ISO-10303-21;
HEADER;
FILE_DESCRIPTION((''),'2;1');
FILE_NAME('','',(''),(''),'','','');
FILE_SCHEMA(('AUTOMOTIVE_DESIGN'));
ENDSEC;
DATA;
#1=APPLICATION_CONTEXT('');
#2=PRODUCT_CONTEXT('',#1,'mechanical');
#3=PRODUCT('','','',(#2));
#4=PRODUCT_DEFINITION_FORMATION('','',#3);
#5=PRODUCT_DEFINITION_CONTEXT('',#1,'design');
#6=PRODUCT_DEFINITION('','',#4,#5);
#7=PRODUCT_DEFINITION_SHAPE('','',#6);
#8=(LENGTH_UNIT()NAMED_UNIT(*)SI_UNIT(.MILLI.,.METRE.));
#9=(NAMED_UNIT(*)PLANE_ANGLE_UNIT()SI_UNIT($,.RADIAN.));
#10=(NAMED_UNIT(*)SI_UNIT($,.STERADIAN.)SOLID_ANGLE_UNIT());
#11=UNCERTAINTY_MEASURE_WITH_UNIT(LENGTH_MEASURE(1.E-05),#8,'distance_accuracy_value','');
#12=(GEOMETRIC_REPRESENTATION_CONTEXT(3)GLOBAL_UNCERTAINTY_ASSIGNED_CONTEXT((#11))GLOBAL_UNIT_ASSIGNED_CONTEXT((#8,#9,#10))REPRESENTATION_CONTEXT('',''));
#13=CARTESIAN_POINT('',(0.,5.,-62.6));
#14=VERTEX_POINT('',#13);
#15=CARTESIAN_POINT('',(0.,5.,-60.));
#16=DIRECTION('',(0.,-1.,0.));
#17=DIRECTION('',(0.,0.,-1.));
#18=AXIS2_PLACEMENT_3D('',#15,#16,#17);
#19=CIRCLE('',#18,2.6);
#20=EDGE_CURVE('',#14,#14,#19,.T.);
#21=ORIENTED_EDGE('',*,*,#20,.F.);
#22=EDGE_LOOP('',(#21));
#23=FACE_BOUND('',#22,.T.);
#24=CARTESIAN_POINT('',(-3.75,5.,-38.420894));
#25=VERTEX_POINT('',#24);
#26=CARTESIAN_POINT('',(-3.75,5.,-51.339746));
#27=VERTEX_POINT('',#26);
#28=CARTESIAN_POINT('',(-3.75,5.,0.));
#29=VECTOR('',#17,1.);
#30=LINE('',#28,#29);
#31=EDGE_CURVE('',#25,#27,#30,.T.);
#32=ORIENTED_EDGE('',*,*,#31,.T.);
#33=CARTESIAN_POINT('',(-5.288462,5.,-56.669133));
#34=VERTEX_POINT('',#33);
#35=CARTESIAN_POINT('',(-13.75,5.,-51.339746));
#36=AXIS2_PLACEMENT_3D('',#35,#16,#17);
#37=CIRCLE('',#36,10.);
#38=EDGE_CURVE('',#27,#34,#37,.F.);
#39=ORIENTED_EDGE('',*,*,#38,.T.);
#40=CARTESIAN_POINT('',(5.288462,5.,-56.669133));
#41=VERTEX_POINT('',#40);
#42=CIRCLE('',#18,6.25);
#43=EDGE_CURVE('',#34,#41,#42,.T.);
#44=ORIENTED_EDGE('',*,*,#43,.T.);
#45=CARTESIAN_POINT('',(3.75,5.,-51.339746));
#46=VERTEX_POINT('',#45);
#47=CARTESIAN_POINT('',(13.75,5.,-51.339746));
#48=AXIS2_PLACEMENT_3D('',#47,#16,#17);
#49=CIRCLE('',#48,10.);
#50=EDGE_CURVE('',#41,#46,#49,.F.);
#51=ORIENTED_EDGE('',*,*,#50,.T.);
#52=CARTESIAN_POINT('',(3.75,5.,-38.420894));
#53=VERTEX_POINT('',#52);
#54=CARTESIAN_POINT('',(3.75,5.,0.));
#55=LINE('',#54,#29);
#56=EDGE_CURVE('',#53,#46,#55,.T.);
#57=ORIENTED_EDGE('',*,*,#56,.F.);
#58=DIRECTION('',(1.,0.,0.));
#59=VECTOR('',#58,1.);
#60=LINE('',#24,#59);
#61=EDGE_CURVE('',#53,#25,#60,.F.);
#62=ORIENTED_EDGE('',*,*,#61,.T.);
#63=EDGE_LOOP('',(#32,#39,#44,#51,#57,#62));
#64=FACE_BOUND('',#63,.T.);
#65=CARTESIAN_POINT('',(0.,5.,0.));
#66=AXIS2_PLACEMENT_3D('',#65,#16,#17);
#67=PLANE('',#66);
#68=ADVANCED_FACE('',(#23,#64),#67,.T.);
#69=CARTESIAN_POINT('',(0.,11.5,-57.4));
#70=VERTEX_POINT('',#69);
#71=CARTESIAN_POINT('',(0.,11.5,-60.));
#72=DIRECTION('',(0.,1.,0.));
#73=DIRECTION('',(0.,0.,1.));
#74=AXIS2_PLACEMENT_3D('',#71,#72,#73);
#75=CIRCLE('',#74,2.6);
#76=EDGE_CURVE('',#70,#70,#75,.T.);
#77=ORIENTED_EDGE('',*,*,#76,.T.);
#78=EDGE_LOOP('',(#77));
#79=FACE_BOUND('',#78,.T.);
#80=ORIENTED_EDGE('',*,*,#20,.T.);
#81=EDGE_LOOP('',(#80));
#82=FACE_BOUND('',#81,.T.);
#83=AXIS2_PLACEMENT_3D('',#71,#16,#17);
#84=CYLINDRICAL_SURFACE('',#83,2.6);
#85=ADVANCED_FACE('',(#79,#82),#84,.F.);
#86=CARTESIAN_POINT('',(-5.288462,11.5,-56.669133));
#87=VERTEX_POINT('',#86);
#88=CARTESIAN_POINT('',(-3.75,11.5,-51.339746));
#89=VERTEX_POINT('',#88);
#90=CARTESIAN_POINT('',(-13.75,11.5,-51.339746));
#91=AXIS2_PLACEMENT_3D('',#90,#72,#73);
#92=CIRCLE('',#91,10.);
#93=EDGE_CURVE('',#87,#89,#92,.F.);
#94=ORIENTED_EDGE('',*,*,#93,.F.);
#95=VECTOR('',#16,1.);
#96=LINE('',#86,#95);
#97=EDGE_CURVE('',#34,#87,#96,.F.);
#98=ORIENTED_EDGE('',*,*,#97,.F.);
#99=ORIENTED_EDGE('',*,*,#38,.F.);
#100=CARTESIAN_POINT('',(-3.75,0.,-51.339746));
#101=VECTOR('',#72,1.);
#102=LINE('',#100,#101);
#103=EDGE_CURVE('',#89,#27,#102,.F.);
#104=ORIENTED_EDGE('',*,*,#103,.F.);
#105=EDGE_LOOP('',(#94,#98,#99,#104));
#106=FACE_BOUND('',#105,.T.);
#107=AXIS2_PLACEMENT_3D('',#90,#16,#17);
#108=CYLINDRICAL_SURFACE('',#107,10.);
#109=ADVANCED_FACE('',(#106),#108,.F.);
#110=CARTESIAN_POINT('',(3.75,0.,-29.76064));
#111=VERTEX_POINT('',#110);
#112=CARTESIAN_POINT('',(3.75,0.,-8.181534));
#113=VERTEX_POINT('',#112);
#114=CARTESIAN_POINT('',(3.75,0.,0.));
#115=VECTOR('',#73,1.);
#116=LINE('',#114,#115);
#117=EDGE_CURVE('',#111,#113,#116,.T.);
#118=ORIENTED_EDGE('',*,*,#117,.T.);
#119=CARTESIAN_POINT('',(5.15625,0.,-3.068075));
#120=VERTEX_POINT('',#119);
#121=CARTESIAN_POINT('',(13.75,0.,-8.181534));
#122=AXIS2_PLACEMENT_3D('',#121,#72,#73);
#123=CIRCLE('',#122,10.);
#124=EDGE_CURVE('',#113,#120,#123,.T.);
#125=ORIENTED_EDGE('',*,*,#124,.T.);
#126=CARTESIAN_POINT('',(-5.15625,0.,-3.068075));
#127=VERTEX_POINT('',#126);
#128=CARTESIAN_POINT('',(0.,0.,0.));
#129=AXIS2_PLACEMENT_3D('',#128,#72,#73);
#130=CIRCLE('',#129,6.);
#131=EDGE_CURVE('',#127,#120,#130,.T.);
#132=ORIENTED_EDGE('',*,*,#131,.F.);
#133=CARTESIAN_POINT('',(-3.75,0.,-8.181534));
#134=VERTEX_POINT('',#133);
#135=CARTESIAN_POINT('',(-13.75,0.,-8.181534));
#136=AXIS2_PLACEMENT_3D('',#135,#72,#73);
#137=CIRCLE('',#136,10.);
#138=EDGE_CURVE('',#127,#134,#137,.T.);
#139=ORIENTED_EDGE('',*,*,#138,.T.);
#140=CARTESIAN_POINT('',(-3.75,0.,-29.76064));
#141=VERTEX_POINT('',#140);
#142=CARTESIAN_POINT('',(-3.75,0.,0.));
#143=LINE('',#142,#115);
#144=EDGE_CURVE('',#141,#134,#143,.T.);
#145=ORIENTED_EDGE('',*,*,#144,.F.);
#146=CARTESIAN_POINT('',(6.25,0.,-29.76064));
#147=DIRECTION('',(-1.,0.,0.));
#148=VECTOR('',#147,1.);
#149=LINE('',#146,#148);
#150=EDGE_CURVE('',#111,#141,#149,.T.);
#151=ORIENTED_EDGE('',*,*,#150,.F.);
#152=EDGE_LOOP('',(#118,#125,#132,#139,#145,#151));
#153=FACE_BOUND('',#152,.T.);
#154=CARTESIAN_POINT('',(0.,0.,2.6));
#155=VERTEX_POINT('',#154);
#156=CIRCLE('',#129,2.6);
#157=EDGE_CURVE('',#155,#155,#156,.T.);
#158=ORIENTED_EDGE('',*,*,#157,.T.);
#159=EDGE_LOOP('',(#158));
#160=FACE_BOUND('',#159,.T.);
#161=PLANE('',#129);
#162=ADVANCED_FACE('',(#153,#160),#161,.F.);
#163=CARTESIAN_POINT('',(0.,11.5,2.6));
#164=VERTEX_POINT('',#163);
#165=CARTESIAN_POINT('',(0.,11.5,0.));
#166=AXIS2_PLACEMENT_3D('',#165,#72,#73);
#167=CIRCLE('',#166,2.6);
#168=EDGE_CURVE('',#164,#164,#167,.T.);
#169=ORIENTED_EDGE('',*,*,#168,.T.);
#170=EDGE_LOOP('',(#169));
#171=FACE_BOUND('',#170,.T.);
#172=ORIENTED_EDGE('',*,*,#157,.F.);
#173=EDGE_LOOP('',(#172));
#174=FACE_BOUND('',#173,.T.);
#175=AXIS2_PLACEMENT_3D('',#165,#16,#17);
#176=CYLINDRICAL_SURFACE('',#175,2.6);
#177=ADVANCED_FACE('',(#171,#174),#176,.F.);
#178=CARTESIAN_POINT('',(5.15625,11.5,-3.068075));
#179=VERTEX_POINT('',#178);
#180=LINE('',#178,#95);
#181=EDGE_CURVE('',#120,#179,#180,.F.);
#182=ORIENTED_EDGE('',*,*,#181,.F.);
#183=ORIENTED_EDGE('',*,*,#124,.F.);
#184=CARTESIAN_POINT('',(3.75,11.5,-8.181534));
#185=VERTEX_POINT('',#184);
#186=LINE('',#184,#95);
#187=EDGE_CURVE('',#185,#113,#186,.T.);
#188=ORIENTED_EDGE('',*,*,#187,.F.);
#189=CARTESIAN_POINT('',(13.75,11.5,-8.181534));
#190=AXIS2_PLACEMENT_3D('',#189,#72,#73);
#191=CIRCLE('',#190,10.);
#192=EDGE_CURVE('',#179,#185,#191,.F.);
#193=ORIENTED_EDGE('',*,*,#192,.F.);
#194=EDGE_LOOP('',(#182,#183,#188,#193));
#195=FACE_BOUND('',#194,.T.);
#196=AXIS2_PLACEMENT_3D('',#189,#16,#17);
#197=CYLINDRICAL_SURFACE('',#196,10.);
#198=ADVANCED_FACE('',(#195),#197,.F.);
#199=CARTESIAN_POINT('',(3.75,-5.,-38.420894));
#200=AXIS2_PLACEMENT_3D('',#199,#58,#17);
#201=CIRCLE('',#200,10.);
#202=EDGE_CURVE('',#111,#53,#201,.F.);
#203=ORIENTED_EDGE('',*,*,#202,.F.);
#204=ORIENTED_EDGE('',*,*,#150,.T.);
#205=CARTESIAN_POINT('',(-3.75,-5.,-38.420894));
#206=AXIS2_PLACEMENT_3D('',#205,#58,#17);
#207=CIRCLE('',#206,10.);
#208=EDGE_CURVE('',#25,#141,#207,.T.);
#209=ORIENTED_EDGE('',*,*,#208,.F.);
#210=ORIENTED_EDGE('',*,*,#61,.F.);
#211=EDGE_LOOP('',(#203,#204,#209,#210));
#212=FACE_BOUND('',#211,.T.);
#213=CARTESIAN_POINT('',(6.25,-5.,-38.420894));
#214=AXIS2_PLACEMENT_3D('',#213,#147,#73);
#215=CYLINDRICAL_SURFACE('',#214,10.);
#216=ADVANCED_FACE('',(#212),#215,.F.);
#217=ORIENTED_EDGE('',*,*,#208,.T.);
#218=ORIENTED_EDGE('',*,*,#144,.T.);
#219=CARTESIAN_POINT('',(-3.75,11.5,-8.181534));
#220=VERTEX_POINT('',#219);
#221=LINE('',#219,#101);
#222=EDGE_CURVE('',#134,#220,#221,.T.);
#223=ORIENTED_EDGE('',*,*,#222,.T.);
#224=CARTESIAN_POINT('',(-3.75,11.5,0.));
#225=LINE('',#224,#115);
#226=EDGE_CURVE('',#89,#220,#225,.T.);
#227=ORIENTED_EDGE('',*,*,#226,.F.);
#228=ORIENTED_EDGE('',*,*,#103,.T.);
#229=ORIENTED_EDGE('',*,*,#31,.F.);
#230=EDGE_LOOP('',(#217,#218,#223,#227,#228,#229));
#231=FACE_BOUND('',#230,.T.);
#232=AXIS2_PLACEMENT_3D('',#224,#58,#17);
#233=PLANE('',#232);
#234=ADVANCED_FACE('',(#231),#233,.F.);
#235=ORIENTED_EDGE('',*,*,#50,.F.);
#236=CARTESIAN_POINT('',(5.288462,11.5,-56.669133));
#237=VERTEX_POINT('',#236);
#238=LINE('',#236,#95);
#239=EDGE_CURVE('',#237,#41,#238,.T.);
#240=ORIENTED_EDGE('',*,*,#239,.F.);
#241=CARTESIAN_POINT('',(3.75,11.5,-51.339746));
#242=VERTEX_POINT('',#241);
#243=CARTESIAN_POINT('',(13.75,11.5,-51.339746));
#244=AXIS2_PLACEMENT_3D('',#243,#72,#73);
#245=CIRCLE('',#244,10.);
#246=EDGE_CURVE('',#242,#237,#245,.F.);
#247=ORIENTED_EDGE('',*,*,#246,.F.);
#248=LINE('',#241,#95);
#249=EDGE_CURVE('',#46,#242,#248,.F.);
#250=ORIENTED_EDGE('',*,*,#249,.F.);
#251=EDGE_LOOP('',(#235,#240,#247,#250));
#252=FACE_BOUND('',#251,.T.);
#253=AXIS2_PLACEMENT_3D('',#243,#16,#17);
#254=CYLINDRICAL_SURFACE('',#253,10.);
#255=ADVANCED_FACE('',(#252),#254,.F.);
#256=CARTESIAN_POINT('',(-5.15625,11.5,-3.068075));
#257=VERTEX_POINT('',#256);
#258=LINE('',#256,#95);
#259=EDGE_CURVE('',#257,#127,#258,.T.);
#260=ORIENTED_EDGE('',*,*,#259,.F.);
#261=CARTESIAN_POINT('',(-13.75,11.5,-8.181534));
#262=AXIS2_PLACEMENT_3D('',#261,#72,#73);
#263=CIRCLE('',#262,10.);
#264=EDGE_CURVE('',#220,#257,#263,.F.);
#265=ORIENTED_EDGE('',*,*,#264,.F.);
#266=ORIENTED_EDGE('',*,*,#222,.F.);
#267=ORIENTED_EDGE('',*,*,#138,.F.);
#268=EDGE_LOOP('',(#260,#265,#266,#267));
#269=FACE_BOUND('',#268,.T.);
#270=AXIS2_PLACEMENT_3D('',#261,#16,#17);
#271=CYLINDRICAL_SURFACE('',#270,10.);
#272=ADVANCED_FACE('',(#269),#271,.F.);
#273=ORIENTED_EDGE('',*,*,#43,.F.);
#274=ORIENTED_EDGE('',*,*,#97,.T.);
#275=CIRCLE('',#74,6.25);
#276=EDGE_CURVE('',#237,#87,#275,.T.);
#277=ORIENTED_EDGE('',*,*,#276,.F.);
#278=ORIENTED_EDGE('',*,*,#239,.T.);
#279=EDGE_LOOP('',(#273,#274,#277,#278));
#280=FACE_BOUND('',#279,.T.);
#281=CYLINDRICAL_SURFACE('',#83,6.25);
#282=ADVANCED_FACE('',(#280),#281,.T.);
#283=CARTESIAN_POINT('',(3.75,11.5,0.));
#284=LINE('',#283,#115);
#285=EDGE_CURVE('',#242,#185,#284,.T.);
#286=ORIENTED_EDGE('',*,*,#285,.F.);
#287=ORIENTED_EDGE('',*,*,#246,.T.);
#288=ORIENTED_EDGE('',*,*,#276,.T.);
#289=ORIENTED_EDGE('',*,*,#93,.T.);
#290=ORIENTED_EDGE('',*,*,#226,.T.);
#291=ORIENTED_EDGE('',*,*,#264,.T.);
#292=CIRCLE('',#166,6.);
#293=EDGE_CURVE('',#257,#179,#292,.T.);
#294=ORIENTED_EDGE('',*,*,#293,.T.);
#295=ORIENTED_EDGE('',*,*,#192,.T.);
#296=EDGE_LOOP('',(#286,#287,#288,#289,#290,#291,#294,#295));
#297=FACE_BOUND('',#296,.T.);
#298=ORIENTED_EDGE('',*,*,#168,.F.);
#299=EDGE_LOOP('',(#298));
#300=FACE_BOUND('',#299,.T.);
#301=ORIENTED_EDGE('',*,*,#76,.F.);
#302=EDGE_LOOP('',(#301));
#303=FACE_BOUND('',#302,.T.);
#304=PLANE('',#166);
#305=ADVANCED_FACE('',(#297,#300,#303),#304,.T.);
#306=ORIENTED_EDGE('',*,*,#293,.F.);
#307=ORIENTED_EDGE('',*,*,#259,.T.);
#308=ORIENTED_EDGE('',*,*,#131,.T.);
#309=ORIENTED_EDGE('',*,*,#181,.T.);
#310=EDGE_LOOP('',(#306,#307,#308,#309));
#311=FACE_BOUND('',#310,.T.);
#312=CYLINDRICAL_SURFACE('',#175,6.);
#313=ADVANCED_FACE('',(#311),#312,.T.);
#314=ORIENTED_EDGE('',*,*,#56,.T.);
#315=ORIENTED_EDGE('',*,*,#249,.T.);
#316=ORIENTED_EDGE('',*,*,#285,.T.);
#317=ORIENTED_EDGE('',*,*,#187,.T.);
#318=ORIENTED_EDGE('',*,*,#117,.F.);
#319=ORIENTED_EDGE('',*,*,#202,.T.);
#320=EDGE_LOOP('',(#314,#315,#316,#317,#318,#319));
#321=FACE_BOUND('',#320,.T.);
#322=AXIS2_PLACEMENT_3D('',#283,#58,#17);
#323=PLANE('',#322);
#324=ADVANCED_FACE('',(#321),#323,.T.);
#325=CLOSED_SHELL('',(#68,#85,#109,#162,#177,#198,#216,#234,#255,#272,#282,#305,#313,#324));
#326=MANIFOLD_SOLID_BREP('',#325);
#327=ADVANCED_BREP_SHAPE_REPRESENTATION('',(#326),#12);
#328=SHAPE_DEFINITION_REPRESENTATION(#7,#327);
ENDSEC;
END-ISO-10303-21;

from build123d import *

# Parameters (mm, degrees)
SKETCH1_R           = 6.25
SKETCH1_R_2         = 2.6
SKETCH1_R_3         = 6
SKETCH1_W           = 7.5
SKETCH1_H           = 50.316251501
BOSS_EXTRUDE1_DEPTH = 11.5
FILLET1_R           = 10
SKETCH2_W           = 12.5
SKETCH2_H           = 36.489359976
CUT_EXTRUDE1_DEPTH  = 5
FILLET2_R           = 10


with BuildPart() as part:
    # Sketch1 → Boss-Extrude1 (new body)
    # profile 1 of 3: a face of its own
    with BuildSketch(Plane(origin=(0, 0, 0), x_dir=(1, 0, 0), z_dir=(0, 1, 0))):
        with Locations((0, 60)):
            Circle(SKETCH1_R)
        with Locations(Location((0, 60, 0), (0, 0, 270))):
            Circle(SKETCH1_R_2, mode=Mode.SUBTRACT)
    # profile 2 of 3: a face of its own
    with BuildSketch(Plane(origin=(0, 0, 0), x_dir=(1, 0, 0), z_dir=(0, 1, 0))):
        Circle(SKETCH1_R_3)
        with Locations(Location((0, 0, 0), (0, 0, 270))):
            Circle(SKETCH1_R_2, mode=Mode.SUBTRACT)
    # profile 3 of 3: a face of its own
    with BuildSketch(Plane(origin=(0, 0, 0), x_dir=(1, 0, 0), z_dir=(0, 1, 0))):
        with Locations((0, 29.84187425)):
            Rectangle(SKETCH1_W, SKETCH1_H)
    extrude(amount=BOSS_EXTRUDE1_DEPTH)

    # Fillet1
    fillet1_edges = [part.edges().sort_by_distance(p)[0] for p in [
        (-3.75, 5.75, -55),
        (3.75, 5.75, -55),
        (3.75, 5.75, -4.683748499),
        (-3.75, 5.75, -4.683748499),
    ]]
    fillet(fillet1_edges, radius=FILLET1_R)

    # Sketch2 → Cut-Extrude1 (cut)
    with BuildSketch(Plane.XZ):
        with Locations((0, -48.005320012)):
            Rectangle(SKETCH2_W, SKETCH2_H)
    extrude(amount=-CUT_EXTRUDE1_DEPTH, mode=Mode.SUBTRACT)

    # Fillet2
    # the kernel refuses this fillet: 10 mm, written as the material it adds along each edge
    with BuildSketch(Plane(origin=(-3.75, 5, -29.760640024), x_dir=(0, -1, 0), z_dir=(1, 0, 0))) as fillet2_piece_1:
        with BuildLine():
            CenterArc((10, 8.660254038), FILLET2_R, 180, 60)
            Line((0, 8.660254038), (-0.2, 8.660254038))
            Line((-0.2, 8.660254038), (-0.2, 0))
            Line((-0.2, 0), (0, -0.2))
            ThreePointArc((0, -0.2), (2.5, -0.2), (4.9, -0.173205081))
            Line((4.9, -0.173205081), (5, 0))
        make_face()
    extrude(amount=7.5)


solid = part.part
